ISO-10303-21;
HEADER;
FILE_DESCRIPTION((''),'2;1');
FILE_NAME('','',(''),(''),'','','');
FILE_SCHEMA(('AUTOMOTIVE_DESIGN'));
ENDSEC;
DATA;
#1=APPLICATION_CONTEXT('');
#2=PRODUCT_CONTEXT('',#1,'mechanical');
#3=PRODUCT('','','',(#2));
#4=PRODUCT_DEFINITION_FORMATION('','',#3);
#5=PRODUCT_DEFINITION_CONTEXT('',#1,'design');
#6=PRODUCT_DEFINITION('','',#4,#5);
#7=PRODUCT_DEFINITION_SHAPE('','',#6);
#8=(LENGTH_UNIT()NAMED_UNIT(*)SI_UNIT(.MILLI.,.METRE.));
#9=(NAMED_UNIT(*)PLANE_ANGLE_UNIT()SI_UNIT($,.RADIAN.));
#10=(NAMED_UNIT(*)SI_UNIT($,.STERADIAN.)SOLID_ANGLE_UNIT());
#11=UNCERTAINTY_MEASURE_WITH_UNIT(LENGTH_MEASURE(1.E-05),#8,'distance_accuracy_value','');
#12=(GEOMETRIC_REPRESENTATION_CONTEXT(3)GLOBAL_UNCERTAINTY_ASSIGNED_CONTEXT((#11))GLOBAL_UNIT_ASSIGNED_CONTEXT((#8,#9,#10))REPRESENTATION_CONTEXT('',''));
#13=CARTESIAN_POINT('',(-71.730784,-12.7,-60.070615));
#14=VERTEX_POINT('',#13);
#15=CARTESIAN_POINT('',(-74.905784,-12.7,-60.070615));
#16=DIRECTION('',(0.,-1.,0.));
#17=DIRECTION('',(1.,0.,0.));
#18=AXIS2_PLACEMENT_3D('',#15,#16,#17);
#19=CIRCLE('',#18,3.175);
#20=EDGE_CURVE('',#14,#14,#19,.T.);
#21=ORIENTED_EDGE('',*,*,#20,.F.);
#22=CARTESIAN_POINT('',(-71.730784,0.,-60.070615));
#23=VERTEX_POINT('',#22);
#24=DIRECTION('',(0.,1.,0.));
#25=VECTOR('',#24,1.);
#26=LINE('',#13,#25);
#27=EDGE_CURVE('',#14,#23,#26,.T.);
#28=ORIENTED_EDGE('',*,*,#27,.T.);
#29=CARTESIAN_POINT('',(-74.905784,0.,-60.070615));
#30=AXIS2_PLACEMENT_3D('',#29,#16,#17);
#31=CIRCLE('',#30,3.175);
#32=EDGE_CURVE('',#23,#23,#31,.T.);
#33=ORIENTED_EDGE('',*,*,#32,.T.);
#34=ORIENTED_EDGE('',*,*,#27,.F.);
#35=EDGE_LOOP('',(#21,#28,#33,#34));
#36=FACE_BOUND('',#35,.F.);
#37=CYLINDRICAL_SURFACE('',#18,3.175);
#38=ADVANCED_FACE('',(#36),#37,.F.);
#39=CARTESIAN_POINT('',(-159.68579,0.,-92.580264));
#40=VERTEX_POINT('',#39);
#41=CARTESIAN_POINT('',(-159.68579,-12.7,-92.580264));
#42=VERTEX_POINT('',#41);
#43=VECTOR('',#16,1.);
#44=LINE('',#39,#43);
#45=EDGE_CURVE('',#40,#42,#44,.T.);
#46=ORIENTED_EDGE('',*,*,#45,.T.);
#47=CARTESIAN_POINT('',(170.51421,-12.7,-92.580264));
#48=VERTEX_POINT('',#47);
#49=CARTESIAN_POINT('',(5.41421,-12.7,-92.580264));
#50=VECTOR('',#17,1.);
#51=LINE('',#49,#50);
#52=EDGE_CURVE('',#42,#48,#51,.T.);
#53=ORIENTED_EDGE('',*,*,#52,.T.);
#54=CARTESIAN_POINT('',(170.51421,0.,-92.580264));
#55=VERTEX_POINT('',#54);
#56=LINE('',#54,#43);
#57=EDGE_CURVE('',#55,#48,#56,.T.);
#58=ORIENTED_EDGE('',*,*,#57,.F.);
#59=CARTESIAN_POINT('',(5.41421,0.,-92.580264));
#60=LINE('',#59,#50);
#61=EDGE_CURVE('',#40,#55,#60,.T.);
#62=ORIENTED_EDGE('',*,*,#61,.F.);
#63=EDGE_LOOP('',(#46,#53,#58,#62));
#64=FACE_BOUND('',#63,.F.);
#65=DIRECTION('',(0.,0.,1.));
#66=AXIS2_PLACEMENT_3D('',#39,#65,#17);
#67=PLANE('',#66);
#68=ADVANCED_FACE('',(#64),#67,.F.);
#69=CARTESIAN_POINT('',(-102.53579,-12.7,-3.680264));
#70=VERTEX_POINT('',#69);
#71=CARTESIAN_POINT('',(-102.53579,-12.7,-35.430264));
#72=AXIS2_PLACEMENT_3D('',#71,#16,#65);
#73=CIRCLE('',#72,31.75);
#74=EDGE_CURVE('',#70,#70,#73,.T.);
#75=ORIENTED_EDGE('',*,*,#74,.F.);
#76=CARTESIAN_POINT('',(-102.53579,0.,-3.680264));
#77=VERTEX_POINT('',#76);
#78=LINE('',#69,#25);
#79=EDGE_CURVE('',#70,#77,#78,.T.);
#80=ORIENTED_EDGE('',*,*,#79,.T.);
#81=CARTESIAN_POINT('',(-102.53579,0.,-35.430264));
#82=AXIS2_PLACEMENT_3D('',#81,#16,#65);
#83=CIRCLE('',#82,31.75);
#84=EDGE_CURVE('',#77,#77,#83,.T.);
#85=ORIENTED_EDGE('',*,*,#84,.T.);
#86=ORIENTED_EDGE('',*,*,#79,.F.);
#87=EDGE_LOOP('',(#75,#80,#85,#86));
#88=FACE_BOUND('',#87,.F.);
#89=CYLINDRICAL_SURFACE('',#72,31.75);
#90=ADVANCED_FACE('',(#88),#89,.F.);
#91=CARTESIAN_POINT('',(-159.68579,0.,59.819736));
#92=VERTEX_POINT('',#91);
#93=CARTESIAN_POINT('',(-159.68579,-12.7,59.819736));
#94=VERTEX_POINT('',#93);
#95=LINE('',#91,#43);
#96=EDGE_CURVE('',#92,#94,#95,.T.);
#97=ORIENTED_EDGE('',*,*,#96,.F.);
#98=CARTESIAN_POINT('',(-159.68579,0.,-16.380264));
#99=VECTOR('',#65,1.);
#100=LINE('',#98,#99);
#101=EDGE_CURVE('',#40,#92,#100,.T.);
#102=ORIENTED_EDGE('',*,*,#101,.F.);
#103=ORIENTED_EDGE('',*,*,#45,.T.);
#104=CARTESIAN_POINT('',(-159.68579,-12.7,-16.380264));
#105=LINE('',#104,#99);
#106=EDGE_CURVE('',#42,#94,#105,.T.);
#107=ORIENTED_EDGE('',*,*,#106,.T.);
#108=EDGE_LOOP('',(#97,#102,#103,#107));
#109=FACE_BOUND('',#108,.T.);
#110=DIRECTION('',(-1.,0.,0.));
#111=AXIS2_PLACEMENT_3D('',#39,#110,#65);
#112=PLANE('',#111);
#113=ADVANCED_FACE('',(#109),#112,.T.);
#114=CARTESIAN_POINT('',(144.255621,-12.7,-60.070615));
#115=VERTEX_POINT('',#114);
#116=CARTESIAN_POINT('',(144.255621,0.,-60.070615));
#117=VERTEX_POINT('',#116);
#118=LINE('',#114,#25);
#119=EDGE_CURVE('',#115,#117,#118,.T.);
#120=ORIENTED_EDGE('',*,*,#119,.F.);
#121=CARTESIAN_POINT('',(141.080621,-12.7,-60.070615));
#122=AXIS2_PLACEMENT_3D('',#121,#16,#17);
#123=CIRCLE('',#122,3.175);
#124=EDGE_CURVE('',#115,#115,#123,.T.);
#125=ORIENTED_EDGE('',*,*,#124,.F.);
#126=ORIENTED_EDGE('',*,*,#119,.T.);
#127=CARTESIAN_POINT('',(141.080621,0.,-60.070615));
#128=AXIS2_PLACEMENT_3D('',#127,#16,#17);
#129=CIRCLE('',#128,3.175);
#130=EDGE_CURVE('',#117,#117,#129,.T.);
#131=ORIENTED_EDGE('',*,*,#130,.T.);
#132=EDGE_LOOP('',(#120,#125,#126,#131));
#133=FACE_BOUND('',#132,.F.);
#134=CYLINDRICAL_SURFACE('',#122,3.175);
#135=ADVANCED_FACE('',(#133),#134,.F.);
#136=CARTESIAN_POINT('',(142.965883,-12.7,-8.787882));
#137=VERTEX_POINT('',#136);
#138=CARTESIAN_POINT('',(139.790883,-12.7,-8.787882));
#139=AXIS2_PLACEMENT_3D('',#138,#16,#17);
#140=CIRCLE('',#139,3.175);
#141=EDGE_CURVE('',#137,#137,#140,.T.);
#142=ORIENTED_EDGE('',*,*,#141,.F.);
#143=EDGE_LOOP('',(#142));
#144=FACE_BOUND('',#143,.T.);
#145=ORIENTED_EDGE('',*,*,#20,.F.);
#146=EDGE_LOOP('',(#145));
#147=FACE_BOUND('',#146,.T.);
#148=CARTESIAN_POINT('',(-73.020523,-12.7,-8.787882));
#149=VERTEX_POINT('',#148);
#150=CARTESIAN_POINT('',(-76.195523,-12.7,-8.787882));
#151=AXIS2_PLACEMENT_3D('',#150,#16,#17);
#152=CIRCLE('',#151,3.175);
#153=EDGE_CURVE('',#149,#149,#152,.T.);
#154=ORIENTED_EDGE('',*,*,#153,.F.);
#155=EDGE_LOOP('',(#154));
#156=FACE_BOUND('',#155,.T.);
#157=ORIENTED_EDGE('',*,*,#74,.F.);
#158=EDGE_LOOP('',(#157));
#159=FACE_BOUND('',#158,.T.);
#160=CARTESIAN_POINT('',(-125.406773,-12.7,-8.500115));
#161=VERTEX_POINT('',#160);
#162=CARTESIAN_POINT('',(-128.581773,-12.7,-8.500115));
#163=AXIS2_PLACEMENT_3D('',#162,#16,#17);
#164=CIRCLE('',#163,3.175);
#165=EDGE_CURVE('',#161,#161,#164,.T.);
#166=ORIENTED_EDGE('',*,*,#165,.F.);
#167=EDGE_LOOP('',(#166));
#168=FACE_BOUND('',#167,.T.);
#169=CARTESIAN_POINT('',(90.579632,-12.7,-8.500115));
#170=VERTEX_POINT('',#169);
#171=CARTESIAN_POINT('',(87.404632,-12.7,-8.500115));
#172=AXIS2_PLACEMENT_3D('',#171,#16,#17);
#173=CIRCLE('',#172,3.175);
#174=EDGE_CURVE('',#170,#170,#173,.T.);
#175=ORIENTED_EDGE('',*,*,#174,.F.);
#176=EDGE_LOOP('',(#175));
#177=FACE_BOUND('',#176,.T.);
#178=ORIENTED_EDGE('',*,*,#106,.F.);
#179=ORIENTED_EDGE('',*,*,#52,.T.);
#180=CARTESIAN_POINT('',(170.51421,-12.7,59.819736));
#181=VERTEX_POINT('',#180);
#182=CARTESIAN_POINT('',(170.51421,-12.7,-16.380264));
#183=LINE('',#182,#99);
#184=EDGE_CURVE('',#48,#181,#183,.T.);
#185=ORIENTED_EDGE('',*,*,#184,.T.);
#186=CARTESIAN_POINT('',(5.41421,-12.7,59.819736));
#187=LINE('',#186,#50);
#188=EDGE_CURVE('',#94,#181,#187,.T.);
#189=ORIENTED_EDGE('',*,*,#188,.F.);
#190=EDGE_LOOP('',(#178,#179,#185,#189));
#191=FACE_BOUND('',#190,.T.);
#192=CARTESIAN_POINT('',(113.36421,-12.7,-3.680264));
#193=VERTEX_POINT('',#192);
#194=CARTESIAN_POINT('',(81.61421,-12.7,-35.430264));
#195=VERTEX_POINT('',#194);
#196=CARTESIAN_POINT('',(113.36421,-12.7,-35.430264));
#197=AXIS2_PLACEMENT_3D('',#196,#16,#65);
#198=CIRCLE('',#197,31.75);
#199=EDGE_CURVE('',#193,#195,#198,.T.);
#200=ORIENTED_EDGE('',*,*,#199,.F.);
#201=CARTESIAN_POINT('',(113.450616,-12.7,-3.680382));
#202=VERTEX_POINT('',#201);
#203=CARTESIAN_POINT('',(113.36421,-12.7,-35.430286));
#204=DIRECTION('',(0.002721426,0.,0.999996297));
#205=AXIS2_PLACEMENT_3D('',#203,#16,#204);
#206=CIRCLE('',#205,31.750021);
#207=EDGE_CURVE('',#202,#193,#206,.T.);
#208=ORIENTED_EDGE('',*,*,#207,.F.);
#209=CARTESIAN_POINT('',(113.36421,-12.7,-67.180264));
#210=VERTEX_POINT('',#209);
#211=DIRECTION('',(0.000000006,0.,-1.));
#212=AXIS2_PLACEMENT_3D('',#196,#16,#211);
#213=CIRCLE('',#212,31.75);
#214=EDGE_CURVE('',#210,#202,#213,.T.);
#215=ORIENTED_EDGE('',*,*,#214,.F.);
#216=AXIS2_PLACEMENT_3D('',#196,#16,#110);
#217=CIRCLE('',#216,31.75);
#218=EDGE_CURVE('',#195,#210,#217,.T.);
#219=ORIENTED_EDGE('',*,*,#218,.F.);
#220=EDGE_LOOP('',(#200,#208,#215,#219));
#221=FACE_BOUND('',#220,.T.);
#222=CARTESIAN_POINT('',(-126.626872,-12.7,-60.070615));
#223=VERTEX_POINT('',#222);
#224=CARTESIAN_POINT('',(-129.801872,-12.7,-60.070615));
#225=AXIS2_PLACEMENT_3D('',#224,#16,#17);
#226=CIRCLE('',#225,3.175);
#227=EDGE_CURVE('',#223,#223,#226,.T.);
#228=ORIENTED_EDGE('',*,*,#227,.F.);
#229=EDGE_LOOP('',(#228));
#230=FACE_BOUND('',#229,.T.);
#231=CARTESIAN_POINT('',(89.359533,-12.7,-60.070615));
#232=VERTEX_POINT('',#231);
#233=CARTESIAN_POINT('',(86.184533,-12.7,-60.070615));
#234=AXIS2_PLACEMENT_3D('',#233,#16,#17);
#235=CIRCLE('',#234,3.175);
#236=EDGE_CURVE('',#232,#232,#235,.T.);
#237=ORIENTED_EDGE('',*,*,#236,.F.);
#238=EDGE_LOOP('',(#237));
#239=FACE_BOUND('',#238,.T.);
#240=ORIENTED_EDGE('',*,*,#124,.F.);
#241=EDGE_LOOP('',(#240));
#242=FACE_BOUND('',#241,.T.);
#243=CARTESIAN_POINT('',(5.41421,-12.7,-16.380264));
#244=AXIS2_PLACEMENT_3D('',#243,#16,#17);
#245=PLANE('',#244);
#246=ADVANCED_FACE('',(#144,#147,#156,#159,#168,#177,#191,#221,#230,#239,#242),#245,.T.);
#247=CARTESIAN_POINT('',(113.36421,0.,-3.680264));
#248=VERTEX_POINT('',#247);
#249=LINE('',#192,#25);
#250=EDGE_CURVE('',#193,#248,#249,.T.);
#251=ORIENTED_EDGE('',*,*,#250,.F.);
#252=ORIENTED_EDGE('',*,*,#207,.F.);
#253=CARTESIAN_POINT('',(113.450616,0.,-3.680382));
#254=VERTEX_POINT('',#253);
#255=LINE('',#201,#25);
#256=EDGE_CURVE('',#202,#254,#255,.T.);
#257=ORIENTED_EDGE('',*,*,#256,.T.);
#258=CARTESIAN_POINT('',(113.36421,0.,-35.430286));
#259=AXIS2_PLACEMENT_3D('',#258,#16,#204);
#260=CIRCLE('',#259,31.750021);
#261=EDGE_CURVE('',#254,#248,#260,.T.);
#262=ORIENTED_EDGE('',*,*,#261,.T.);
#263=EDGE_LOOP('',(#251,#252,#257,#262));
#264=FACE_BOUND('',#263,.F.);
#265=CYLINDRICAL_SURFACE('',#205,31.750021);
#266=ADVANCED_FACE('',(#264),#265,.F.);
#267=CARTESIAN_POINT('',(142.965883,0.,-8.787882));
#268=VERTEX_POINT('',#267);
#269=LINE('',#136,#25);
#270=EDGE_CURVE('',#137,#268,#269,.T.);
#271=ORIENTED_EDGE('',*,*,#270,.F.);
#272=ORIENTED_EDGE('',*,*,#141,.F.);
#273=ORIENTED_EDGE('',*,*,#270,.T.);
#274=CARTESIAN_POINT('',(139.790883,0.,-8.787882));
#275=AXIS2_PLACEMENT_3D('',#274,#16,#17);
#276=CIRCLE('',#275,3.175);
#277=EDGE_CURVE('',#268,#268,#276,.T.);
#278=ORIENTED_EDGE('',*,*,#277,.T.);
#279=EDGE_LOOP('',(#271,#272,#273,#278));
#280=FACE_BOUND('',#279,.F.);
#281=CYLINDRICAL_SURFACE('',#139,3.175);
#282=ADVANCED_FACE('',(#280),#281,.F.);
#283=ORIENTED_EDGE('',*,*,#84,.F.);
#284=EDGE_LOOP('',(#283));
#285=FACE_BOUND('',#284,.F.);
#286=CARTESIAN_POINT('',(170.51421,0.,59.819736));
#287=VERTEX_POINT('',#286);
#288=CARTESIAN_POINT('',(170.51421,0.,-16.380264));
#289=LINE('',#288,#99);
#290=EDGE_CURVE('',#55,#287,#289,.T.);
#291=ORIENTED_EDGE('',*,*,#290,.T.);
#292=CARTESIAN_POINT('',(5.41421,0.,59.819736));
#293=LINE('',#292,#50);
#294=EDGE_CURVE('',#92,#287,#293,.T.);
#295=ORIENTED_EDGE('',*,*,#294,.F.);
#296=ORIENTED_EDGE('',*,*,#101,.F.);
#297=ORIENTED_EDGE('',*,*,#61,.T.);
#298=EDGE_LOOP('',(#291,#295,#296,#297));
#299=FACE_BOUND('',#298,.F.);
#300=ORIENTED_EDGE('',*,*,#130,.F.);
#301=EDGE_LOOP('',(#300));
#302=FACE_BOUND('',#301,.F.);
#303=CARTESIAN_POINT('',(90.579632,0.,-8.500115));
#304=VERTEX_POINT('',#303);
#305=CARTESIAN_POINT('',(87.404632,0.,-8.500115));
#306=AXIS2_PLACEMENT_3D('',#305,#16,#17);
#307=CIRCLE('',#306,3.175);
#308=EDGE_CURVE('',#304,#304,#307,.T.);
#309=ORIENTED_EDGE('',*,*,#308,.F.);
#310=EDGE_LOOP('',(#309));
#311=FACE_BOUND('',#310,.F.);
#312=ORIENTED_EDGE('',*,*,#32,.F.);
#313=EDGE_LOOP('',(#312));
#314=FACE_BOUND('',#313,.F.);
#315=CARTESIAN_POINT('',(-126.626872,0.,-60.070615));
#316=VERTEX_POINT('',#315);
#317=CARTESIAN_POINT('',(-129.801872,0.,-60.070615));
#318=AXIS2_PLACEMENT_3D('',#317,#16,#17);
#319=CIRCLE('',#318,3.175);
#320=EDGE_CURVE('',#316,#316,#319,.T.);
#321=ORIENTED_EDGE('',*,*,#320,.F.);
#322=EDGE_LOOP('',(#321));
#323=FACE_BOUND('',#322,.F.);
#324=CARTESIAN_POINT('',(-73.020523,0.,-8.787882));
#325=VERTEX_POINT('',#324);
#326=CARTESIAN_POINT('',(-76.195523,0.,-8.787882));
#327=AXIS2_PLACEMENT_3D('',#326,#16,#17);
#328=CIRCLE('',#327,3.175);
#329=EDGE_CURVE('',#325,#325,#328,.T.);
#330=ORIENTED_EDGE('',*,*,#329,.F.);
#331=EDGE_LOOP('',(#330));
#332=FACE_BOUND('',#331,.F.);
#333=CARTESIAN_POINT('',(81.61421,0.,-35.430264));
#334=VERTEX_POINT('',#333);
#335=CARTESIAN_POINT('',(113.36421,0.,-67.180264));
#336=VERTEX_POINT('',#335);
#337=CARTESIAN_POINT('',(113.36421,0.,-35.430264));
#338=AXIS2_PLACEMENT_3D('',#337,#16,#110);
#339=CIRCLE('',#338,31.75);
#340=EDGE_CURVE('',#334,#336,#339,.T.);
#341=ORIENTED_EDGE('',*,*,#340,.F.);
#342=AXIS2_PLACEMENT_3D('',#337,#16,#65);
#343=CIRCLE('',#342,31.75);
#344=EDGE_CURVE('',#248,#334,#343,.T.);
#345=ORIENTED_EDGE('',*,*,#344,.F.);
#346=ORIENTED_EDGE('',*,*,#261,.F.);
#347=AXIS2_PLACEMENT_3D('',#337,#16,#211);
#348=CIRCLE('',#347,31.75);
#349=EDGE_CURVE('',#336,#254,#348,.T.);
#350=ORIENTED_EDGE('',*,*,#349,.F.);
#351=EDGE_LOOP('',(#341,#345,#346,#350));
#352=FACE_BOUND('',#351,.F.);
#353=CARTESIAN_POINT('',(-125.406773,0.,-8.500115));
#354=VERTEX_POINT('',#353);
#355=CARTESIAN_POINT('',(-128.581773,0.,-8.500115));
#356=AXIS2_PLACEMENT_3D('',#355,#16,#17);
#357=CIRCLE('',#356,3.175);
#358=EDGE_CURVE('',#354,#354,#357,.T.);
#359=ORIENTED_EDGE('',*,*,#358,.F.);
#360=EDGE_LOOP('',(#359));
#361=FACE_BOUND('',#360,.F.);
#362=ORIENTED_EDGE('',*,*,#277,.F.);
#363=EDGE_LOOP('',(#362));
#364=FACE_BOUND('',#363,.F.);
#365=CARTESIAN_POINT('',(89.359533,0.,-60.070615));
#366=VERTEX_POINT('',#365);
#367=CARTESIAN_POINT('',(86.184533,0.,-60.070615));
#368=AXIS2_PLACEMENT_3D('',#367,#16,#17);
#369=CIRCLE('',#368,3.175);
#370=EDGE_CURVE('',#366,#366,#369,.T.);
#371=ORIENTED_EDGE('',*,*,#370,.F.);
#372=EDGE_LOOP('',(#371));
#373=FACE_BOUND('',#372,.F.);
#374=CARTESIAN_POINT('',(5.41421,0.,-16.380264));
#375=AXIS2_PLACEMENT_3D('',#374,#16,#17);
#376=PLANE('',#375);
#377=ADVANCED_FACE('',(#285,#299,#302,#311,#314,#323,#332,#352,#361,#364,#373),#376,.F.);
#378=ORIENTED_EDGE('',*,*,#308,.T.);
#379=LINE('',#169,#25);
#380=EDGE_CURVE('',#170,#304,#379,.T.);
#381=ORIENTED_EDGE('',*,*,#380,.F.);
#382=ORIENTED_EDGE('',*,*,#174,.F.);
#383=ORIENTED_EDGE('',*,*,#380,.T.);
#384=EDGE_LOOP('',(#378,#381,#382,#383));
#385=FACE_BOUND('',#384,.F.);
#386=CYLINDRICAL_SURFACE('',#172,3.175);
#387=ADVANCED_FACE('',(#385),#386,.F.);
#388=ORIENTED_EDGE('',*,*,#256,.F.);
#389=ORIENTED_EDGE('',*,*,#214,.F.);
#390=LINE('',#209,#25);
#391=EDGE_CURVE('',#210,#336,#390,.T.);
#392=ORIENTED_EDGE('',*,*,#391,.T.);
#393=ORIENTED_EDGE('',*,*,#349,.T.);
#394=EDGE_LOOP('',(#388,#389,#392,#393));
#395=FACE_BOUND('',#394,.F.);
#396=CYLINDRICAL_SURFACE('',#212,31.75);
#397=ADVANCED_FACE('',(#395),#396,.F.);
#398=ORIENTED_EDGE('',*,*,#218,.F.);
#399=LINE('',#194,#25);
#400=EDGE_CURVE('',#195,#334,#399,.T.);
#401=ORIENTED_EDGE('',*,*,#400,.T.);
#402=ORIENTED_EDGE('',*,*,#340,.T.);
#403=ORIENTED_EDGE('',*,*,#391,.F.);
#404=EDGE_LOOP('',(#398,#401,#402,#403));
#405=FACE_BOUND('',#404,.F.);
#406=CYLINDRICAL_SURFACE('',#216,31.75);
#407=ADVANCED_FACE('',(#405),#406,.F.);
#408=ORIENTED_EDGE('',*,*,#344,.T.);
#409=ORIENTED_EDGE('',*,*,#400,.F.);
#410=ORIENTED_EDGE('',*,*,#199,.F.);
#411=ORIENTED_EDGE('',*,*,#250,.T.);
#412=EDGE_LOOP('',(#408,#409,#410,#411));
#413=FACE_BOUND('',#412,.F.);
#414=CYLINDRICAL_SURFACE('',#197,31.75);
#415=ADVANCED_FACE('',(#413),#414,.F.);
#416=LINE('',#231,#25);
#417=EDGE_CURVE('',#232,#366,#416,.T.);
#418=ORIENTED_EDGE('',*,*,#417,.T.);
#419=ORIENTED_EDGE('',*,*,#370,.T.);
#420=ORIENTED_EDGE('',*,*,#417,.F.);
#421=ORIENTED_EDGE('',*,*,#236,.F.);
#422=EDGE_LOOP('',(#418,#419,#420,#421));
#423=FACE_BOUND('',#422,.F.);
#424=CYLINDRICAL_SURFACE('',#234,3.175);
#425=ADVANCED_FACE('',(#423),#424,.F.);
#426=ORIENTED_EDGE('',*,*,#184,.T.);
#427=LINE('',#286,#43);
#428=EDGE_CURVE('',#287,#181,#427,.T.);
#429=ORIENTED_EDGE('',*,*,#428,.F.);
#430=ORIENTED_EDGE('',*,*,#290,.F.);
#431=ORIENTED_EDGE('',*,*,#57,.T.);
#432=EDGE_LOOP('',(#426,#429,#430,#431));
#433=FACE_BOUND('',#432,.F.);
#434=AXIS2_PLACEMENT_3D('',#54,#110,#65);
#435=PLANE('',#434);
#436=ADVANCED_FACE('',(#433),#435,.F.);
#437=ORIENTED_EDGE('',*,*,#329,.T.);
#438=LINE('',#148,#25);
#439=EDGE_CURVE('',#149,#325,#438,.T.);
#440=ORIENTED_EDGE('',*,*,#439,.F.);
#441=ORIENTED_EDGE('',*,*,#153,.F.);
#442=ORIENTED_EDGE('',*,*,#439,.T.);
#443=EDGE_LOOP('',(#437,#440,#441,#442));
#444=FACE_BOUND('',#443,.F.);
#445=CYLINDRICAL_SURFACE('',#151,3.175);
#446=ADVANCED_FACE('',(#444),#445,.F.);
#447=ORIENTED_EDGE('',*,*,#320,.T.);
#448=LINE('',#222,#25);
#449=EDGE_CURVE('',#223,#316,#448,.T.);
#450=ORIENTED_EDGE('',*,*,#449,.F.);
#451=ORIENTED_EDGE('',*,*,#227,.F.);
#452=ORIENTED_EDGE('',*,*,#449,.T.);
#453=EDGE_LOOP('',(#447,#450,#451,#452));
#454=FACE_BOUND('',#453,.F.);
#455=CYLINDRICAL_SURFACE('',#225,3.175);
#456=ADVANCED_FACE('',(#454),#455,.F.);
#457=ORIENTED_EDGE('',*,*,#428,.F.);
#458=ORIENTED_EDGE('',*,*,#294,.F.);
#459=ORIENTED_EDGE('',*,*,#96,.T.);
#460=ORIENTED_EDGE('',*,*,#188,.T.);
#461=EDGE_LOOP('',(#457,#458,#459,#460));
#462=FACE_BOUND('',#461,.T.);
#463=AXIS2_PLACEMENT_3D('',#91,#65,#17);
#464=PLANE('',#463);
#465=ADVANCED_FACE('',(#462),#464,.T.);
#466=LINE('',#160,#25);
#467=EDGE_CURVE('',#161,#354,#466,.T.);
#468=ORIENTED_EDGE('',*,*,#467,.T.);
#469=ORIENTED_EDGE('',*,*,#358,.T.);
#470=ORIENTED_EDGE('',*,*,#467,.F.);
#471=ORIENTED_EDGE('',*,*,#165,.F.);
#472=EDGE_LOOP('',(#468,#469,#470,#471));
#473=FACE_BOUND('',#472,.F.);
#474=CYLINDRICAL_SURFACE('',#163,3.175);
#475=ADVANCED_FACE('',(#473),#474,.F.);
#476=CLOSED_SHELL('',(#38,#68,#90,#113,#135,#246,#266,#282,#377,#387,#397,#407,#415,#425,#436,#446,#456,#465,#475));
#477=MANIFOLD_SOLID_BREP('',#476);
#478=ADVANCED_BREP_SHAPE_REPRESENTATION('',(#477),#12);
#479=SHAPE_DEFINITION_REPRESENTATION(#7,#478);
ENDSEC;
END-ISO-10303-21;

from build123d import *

# Parameters (mm, degrees)
F0_W     = 330.2
F0_H     = 152.4
F1_DEPTH = 12.7
F2_R     = 3.175
F3_DEPTH = 25.4


with BuildPart() as f1:
    # F0 (on Front) → F1 (new body)
    with BuildSketch(Plane.XZ):
        with Locations((5.4142102599, -16.3802644663)):
            Rectangle(F0_W, F0_H)
    extrude(amount=F1_DEPTH)

    # F2 (on face) → F3 (cut)
    with BuildSketch(Plane.XZ.offset(12.7)):
        with BuildLine():
            ThreePointArc((-70.7857897401, -35.4302644663), (-80.0851494374, -12.9796241636), (-102.5357897401, -3.6802644663))
            ThreePointArc((-102.5357897401, -3.6802644663), (-124.9864300428, -12.9796241636), (-134.2857897401, -35.4302644663))
            ThreePointArc((-134.2857897401, -35.4302644663), (-124.9864300428, -57.8809047689), (-102.5357897401, -67.1802644663))
            ThreePointArc((-102.5357897401, -67.1802644663), (-80.0851494374, -57.8809047689), (-70.7857897401, -35.4302644663))
        make_face()
        with BuildLine():
            ThreePointArc((81.6142102599, -35.4302644663), (90.9135700285, -57.8809048401), (113.3642104613, -67.1802644663))
            ThreePointArc((113.3642104613, -67.1802644663), (135.8148506338, -57.8809046977), (145.1142102599, -35.4302644663))
            ThreePointArc((145.1142102599, -35.4302644663), (135.8453787023, -13.0101938717), (113.4506155848, -3.6803820394))
            ThreePointArc((113.4506155848, -3.6803820394), (113.4074129624, -3.6802938596), (113.3642102599, -3.6802644663))
            ThreePointArc((113.3642102599, -3.6802644663), (90.9135699572, -12.9796241636), (81.6142102599, -35.4302644663))
        make_face()
        with Locations((-76.1955228105, -8.7878816322)):
            Circle(F2_R)
        with Locations((-128.5817733597, -8.500114777)):
            Circle(F2_R)
        with Locations((-129.8018724208, -60.0706152875)):
            Circle(F2_R)
        with Locations((-74.9057844611, -60.0706152875)):
            Circle(F2_R)
        with Locations((87.4046319652, -8.500114777)):
            Circle(F2_R)
        with Locations((139.7908825145, -8.7878816322)):
            Circle(F2_R)
        with Locations((141.0806208638, -60.0706152875)):
            Circle(F2_R)
        with Locations((86.1845329041, -60.0706152875)):
            Circle(F2_R)
    extrude(amount=-F3_DEPTH, mode=Mode.SUBTRACT)


solid = f1.part
